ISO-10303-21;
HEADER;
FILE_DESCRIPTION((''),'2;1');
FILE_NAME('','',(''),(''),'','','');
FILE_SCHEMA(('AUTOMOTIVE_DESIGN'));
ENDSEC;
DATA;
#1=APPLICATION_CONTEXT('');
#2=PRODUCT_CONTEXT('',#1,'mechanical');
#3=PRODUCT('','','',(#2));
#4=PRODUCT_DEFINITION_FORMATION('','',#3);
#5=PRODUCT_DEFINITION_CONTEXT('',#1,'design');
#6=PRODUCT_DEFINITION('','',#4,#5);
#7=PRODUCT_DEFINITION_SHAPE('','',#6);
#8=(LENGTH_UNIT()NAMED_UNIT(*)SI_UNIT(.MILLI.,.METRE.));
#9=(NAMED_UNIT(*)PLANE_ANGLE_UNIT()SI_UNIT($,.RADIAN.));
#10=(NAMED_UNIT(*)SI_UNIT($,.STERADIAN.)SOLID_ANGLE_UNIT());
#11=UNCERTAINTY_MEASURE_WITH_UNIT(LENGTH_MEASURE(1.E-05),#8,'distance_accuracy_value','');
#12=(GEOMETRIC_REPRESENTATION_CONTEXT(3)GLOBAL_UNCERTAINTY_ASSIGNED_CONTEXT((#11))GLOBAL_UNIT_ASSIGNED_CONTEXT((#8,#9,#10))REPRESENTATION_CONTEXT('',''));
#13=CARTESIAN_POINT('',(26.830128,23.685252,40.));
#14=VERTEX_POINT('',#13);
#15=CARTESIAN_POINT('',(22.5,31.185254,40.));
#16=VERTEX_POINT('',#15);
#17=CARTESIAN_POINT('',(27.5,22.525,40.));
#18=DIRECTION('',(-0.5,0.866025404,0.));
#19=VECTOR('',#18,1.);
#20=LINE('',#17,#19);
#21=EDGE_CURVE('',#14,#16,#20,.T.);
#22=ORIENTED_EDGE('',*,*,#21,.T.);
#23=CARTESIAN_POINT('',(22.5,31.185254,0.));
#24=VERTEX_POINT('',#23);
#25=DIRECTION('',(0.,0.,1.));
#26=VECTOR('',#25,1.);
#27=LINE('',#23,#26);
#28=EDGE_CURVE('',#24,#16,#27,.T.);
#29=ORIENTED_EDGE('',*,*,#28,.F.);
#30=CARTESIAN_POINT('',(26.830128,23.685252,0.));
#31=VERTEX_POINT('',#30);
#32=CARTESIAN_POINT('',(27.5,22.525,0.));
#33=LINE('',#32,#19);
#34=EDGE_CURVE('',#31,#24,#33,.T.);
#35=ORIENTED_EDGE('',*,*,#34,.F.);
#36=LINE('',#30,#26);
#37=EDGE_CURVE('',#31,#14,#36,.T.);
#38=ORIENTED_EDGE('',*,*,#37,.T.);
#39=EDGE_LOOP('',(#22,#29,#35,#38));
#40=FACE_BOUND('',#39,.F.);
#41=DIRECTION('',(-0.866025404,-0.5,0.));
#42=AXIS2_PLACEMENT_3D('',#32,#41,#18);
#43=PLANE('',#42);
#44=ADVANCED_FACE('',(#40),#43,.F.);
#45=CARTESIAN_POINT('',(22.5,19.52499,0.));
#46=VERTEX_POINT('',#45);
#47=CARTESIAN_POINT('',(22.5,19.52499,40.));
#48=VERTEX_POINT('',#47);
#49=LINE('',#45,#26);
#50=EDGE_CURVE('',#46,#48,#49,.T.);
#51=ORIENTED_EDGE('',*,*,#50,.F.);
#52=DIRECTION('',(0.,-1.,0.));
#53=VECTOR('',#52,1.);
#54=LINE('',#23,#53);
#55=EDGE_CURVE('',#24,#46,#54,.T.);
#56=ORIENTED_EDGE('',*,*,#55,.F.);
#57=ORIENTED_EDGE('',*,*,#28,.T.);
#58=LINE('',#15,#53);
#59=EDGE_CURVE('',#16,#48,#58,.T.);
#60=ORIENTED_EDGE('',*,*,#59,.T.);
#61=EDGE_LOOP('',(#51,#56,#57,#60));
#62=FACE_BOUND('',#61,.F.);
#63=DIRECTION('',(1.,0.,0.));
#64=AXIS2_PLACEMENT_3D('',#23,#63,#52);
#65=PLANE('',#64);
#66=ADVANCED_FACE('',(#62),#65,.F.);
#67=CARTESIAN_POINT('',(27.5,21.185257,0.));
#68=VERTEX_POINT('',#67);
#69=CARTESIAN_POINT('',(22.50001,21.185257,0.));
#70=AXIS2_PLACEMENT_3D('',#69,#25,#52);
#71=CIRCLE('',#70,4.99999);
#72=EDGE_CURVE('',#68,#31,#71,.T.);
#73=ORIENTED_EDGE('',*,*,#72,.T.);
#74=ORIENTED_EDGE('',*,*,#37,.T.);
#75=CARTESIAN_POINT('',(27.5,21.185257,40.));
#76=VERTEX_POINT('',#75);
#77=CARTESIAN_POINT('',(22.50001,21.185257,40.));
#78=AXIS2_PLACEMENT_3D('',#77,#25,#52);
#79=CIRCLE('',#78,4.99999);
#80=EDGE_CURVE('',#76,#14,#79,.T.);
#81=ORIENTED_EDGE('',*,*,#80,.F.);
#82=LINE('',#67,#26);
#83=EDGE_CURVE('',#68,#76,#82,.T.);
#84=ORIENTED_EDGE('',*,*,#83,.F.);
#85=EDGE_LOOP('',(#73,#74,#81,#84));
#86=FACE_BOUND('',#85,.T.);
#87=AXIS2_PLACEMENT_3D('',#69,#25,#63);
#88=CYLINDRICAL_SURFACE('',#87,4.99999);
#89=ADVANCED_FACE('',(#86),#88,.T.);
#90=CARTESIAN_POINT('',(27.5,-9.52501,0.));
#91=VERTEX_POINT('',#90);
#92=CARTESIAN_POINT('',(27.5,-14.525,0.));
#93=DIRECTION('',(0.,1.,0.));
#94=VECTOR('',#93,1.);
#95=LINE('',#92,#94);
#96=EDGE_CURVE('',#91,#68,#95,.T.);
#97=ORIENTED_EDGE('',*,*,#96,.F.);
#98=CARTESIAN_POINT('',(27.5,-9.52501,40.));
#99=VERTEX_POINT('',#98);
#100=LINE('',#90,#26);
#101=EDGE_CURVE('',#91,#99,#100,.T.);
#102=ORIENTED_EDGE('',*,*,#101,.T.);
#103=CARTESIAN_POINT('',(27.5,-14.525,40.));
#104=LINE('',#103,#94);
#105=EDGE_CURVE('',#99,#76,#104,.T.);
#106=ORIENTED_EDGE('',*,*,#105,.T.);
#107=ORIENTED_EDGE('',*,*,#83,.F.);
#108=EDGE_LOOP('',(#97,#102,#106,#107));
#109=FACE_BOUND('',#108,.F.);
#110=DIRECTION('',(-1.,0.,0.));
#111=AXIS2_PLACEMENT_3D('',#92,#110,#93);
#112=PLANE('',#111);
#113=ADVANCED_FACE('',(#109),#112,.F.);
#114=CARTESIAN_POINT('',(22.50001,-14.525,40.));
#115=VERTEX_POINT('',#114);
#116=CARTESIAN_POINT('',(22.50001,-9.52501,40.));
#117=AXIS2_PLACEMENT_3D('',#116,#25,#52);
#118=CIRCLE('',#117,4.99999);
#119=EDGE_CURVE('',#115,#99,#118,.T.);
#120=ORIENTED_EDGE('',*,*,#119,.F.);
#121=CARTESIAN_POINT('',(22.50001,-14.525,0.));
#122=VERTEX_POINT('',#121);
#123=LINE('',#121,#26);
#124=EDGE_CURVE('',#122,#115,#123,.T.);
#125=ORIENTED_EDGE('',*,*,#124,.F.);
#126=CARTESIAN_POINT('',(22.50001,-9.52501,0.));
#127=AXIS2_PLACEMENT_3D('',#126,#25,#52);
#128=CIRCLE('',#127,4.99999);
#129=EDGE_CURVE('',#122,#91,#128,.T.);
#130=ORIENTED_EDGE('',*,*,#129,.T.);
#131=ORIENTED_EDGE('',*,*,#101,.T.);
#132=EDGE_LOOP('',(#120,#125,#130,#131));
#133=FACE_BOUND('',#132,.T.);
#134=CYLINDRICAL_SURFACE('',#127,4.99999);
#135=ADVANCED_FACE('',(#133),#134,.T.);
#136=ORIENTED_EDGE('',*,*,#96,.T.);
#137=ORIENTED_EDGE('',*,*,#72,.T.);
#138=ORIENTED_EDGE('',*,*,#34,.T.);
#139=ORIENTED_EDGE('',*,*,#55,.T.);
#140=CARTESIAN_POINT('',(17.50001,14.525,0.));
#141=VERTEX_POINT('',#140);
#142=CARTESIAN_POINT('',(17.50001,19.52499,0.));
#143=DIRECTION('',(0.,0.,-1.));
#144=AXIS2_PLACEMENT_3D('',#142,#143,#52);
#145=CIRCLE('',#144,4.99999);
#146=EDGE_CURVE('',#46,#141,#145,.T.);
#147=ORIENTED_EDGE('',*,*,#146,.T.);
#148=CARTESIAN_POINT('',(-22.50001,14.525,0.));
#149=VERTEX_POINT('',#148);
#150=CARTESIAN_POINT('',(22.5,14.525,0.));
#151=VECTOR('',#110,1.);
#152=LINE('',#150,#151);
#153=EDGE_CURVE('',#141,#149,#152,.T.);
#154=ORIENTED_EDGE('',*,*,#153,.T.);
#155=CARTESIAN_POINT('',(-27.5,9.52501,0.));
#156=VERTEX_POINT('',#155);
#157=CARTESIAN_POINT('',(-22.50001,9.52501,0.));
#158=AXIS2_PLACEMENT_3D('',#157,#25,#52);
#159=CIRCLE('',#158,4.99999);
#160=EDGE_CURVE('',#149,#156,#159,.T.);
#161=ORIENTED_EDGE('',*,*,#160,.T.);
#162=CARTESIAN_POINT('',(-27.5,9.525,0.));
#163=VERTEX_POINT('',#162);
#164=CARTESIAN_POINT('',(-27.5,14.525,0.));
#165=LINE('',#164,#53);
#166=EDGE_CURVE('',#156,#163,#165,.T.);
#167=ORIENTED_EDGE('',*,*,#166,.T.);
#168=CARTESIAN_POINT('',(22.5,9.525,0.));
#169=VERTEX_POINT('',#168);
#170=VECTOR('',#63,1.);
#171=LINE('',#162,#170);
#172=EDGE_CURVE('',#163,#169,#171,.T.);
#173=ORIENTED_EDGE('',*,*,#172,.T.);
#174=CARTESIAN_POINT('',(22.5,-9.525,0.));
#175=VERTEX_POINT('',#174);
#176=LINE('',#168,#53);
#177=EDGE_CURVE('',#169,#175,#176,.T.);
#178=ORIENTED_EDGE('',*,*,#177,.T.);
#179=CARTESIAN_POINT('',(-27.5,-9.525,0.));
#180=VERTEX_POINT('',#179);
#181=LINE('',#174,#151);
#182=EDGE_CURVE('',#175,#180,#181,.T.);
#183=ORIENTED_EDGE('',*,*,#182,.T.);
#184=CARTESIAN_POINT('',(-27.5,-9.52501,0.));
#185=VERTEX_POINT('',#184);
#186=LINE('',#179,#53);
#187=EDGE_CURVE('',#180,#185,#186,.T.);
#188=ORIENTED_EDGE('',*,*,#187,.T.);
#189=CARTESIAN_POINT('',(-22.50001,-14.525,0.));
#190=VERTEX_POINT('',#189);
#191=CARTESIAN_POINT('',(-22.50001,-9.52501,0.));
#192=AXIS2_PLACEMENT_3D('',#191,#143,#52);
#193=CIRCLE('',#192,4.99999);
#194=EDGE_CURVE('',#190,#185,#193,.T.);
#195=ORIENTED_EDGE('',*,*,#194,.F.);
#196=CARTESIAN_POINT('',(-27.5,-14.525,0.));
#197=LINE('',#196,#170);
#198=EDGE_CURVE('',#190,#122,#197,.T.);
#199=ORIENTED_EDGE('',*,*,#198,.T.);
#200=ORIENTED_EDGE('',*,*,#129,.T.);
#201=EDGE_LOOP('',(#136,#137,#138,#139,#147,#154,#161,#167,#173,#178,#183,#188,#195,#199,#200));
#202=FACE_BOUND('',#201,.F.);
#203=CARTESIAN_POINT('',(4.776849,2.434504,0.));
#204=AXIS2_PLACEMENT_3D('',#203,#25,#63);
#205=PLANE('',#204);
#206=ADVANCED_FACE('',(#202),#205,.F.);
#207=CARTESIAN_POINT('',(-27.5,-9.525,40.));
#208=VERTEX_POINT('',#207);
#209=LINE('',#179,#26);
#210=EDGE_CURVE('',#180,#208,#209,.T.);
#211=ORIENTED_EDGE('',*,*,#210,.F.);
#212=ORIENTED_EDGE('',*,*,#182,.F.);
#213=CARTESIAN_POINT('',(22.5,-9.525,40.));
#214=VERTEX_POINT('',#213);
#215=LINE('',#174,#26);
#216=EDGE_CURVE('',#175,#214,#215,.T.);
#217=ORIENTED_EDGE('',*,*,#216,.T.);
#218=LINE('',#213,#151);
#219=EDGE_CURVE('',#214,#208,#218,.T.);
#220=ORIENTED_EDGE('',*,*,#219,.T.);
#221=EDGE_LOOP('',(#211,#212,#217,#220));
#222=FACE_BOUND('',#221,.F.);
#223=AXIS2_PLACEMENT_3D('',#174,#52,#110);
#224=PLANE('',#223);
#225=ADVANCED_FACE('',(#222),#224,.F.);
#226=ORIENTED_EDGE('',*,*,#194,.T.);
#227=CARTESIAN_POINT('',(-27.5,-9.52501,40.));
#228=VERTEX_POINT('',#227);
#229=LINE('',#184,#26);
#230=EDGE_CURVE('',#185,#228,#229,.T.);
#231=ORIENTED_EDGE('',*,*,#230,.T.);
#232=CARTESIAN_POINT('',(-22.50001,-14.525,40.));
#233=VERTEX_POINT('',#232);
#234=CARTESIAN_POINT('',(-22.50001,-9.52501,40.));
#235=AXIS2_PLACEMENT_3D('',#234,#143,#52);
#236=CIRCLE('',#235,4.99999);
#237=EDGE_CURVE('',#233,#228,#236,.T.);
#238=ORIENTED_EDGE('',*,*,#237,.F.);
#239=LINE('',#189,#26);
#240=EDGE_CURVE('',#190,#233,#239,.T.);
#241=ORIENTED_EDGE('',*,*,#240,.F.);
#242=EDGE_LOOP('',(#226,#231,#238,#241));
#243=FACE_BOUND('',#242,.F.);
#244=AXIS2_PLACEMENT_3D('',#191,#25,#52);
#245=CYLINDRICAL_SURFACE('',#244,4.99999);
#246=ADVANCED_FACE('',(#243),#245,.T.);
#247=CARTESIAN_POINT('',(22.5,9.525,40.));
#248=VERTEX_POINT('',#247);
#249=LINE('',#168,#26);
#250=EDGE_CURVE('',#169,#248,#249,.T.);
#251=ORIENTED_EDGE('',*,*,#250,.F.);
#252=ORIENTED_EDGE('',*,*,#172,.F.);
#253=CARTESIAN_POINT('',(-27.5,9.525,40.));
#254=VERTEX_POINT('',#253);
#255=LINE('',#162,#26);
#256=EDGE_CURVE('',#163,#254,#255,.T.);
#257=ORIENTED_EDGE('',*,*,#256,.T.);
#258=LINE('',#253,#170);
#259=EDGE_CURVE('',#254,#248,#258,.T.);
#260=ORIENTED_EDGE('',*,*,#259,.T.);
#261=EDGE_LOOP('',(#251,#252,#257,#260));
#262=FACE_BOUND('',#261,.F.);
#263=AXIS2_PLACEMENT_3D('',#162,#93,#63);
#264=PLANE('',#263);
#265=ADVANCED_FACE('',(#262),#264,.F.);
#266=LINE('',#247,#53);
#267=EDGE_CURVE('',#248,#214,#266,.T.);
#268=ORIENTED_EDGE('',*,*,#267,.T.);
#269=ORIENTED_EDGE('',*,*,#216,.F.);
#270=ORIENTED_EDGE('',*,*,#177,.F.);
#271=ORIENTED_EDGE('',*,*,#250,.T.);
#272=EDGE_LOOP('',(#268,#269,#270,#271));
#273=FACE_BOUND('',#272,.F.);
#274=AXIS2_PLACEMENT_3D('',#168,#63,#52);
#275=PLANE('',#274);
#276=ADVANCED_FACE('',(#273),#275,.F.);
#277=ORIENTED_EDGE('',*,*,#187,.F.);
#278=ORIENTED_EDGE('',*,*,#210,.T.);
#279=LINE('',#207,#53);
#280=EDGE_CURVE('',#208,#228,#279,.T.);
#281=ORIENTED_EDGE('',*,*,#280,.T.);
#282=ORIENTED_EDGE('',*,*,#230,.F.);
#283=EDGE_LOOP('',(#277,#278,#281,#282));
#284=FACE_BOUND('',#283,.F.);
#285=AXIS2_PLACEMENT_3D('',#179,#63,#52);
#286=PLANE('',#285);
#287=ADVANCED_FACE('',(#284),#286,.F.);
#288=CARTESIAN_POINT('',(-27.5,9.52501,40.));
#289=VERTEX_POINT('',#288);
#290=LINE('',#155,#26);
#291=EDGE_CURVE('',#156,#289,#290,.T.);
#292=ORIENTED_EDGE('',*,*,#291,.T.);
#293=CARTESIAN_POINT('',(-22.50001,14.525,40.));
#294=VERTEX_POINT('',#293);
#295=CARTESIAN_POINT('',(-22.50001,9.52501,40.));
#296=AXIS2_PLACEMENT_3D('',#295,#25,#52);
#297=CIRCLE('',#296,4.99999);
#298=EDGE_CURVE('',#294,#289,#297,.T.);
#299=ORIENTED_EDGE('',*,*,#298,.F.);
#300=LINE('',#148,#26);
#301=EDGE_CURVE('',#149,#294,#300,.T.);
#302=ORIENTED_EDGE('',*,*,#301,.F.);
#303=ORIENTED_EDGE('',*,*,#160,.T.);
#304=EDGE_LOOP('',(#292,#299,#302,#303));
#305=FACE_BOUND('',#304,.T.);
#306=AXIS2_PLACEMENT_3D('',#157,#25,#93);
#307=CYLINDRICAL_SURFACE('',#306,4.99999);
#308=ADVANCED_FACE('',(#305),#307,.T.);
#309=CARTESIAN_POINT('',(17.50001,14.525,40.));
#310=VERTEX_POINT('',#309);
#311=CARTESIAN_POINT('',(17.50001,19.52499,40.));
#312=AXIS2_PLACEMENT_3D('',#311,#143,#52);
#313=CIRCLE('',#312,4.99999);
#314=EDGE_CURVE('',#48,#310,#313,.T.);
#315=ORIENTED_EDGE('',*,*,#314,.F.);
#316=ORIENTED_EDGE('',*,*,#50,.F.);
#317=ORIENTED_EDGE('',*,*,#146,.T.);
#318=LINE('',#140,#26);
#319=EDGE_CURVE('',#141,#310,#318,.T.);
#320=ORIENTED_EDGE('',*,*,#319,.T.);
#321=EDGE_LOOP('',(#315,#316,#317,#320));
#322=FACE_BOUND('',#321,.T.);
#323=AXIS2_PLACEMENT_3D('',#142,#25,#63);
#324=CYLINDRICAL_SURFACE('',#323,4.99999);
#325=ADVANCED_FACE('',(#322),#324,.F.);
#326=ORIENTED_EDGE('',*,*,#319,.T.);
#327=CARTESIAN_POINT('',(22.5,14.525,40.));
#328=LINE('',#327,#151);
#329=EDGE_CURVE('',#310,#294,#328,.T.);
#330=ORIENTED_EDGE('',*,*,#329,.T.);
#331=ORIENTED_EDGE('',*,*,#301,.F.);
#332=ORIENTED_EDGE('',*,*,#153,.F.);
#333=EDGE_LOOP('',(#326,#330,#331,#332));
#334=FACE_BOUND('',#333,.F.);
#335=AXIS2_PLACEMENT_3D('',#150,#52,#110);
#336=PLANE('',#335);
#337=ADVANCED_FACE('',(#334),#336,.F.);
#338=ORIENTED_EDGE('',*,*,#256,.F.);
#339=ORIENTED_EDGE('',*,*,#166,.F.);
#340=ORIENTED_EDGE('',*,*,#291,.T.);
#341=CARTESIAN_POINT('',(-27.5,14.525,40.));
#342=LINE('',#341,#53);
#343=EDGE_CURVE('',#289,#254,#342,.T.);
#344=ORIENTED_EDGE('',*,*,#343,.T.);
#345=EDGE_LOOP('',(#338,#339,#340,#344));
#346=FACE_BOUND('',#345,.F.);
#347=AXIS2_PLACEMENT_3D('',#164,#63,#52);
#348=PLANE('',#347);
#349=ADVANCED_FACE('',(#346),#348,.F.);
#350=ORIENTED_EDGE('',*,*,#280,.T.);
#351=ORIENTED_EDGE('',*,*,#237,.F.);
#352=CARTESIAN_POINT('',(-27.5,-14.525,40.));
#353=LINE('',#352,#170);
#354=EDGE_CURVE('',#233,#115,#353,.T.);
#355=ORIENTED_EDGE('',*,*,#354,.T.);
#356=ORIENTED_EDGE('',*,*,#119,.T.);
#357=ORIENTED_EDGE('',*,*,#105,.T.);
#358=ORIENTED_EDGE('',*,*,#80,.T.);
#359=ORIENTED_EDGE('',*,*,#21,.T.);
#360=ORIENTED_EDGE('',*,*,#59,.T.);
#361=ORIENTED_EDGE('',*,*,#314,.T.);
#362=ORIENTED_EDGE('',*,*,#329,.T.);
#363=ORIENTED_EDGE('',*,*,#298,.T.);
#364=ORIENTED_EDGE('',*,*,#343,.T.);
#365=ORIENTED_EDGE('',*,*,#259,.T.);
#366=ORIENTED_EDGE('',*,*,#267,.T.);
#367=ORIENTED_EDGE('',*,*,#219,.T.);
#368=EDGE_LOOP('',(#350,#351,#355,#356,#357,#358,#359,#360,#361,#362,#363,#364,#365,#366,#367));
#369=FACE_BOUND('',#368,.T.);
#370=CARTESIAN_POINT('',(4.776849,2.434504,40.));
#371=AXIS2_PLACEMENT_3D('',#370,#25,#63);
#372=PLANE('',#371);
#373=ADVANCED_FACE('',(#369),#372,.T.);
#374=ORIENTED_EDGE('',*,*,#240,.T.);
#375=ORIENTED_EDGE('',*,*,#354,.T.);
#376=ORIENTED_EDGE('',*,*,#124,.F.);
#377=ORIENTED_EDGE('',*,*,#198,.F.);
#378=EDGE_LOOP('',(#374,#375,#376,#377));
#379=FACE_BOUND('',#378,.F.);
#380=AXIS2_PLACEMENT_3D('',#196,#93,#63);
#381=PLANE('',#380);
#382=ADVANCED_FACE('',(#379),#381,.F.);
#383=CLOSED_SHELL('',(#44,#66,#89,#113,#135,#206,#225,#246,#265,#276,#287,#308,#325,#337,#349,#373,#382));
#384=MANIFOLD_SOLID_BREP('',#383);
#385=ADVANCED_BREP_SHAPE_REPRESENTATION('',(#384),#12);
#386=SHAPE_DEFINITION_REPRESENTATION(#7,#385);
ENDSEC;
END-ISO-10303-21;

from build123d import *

# Parameters (mm, degrees)
F1_DEPTH = 40
F2_R     = 4.99999


# Not quite as in the source:
# - a fillet or chamfer is up to 0.001 mm smaller than in the source, because OpenCascade refuses the exact size


with BuildPart() as f1:
    # F0 (on Top) → F1 (new body)
    with BuildSketch(Plane.XY):
        Polygon((-27.5, -14.525), (27.5, -14.525), (27.5, 14.525), (27.5, 22.525), (22.5, 31.1852540378), (22.5, 22.525), (22.5, 14.525), (-27.5, 14.525), (-27.5, 9.525), (22.5, 9.525), (22.5, -9.525), (-27.5, -9.525), align=None)
    extrude(amount=F1_DEPTH)

    # F2 (radius 5 in the source; OpenCascade refuses exactly that, so slightly less here)
    f2_edges = [f1.edges().sort_by_distance(p)[0] for p in [
        (-27.5, 14.525, 20),
        (-27.5, -14.525, 20),
        (27.5, -14.525, 20),
        (27.5, 22.525, 20),
        (22.5, 14.525, 20),
    ]]
    fillet(f2_edges, radius=F2_R)


solid = f1.part
